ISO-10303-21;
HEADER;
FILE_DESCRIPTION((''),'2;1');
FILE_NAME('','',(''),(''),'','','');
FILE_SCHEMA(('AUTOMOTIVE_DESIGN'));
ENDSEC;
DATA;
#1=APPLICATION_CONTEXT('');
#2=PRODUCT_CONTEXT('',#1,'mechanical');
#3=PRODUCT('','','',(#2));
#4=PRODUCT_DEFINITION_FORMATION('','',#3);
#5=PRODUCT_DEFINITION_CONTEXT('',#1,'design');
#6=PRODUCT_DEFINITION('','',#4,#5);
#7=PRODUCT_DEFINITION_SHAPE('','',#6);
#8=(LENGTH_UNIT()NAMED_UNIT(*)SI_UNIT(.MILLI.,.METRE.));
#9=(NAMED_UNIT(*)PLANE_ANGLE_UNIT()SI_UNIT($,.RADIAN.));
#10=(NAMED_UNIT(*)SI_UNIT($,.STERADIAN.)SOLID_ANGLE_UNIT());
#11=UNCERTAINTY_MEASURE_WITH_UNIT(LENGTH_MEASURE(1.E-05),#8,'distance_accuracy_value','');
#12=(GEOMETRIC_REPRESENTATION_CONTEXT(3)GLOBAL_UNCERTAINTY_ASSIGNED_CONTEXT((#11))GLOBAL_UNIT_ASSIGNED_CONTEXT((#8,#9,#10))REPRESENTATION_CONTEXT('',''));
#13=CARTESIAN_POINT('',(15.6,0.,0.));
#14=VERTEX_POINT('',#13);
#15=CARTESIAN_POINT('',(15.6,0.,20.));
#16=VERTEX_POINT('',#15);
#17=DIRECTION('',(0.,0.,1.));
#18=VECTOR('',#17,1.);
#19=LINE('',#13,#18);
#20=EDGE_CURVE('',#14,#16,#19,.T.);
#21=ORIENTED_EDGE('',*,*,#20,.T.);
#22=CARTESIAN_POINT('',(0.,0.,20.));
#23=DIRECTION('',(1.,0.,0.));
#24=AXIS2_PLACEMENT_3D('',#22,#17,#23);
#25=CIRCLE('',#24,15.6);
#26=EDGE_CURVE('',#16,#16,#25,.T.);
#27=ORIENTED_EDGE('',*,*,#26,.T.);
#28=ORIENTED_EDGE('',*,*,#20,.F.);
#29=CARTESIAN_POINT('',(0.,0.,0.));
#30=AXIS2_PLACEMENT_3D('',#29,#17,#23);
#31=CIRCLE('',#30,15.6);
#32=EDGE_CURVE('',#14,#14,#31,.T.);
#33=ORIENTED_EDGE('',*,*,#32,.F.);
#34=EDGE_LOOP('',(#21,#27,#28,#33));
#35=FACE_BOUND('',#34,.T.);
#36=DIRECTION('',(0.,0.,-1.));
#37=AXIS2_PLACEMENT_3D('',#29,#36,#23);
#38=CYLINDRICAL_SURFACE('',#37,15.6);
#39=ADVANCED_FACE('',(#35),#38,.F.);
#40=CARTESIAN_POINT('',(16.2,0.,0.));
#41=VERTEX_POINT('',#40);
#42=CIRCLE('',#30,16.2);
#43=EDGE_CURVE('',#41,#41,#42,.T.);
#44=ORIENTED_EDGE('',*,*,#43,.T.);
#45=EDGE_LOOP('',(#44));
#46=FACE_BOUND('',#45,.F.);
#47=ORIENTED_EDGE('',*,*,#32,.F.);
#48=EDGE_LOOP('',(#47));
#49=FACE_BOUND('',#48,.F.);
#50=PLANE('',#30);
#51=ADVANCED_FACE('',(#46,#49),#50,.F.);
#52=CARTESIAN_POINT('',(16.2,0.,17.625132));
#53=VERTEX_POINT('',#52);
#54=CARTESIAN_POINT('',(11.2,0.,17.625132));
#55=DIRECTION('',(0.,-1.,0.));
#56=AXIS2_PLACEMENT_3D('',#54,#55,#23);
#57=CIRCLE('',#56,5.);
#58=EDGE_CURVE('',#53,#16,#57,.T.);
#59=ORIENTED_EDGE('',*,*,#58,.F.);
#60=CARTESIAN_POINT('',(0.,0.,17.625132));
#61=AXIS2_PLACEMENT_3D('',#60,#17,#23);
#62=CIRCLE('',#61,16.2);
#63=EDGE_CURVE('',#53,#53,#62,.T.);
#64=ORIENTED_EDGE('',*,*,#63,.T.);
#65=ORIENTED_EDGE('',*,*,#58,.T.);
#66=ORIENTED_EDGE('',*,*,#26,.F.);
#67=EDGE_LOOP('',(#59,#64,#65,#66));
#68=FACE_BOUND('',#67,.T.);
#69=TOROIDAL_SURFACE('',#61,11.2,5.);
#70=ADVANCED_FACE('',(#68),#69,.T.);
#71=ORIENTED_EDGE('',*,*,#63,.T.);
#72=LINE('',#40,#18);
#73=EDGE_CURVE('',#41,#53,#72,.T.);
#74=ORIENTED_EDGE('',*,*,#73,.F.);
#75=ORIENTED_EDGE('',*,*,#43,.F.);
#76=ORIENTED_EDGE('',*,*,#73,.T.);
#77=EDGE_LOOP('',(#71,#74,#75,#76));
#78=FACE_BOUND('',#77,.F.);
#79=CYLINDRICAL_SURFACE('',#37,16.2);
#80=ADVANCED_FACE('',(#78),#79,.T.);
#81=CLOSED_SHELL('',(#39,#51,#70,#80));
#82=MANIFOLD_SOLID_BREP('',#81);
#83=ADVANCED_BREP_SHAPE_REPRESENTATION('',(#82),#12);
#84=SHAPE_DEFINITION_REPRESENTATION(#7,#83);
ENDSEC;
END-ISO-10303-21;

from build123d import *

# Parameters (mm, degrees)
F0_R     = 16.2
F0_R_2   = 15.6
F1_DEPTH = 20


# Not quite as in the source:
# - a fillet or chamfer that OpenCascade refuses, or shapes differently, is made with other operations: its cross-section is extruded or revolved along the edge and cut away or added
# - a feature names something its author has since deleted; it is built from what else it names


with BuildPart() as f1:
    # F0 (on Top) → F1 (new body)
    with BuildSketch(Plane.XY):
        Circle(F0_R)
        Circle(F0_R_2, mode=Mode.SUBTRACT)
    extrude(amount=F1_DEPTH)

    # F2: fillet of radius 5 on 1 edges, made by hand

    # F2_s1 → F2_t2 (revolve, cut)
    with BuildSketch(Plane.XZ):
        with BuildLine():
            ThreePointArc((16.2, 17.6251315826), (16.0476798574, 18.849876454), (15.6, 20))
            Line((15.6, 20), (16.2, 20))
            Line((16.2, 20), (16.2, 17.6251315826))
        make_face()
    revolve(axis=Axis((0, 0, 20), (0, 0, 1)), mode=Mode.SUBTRACT)


solid = f1.part
